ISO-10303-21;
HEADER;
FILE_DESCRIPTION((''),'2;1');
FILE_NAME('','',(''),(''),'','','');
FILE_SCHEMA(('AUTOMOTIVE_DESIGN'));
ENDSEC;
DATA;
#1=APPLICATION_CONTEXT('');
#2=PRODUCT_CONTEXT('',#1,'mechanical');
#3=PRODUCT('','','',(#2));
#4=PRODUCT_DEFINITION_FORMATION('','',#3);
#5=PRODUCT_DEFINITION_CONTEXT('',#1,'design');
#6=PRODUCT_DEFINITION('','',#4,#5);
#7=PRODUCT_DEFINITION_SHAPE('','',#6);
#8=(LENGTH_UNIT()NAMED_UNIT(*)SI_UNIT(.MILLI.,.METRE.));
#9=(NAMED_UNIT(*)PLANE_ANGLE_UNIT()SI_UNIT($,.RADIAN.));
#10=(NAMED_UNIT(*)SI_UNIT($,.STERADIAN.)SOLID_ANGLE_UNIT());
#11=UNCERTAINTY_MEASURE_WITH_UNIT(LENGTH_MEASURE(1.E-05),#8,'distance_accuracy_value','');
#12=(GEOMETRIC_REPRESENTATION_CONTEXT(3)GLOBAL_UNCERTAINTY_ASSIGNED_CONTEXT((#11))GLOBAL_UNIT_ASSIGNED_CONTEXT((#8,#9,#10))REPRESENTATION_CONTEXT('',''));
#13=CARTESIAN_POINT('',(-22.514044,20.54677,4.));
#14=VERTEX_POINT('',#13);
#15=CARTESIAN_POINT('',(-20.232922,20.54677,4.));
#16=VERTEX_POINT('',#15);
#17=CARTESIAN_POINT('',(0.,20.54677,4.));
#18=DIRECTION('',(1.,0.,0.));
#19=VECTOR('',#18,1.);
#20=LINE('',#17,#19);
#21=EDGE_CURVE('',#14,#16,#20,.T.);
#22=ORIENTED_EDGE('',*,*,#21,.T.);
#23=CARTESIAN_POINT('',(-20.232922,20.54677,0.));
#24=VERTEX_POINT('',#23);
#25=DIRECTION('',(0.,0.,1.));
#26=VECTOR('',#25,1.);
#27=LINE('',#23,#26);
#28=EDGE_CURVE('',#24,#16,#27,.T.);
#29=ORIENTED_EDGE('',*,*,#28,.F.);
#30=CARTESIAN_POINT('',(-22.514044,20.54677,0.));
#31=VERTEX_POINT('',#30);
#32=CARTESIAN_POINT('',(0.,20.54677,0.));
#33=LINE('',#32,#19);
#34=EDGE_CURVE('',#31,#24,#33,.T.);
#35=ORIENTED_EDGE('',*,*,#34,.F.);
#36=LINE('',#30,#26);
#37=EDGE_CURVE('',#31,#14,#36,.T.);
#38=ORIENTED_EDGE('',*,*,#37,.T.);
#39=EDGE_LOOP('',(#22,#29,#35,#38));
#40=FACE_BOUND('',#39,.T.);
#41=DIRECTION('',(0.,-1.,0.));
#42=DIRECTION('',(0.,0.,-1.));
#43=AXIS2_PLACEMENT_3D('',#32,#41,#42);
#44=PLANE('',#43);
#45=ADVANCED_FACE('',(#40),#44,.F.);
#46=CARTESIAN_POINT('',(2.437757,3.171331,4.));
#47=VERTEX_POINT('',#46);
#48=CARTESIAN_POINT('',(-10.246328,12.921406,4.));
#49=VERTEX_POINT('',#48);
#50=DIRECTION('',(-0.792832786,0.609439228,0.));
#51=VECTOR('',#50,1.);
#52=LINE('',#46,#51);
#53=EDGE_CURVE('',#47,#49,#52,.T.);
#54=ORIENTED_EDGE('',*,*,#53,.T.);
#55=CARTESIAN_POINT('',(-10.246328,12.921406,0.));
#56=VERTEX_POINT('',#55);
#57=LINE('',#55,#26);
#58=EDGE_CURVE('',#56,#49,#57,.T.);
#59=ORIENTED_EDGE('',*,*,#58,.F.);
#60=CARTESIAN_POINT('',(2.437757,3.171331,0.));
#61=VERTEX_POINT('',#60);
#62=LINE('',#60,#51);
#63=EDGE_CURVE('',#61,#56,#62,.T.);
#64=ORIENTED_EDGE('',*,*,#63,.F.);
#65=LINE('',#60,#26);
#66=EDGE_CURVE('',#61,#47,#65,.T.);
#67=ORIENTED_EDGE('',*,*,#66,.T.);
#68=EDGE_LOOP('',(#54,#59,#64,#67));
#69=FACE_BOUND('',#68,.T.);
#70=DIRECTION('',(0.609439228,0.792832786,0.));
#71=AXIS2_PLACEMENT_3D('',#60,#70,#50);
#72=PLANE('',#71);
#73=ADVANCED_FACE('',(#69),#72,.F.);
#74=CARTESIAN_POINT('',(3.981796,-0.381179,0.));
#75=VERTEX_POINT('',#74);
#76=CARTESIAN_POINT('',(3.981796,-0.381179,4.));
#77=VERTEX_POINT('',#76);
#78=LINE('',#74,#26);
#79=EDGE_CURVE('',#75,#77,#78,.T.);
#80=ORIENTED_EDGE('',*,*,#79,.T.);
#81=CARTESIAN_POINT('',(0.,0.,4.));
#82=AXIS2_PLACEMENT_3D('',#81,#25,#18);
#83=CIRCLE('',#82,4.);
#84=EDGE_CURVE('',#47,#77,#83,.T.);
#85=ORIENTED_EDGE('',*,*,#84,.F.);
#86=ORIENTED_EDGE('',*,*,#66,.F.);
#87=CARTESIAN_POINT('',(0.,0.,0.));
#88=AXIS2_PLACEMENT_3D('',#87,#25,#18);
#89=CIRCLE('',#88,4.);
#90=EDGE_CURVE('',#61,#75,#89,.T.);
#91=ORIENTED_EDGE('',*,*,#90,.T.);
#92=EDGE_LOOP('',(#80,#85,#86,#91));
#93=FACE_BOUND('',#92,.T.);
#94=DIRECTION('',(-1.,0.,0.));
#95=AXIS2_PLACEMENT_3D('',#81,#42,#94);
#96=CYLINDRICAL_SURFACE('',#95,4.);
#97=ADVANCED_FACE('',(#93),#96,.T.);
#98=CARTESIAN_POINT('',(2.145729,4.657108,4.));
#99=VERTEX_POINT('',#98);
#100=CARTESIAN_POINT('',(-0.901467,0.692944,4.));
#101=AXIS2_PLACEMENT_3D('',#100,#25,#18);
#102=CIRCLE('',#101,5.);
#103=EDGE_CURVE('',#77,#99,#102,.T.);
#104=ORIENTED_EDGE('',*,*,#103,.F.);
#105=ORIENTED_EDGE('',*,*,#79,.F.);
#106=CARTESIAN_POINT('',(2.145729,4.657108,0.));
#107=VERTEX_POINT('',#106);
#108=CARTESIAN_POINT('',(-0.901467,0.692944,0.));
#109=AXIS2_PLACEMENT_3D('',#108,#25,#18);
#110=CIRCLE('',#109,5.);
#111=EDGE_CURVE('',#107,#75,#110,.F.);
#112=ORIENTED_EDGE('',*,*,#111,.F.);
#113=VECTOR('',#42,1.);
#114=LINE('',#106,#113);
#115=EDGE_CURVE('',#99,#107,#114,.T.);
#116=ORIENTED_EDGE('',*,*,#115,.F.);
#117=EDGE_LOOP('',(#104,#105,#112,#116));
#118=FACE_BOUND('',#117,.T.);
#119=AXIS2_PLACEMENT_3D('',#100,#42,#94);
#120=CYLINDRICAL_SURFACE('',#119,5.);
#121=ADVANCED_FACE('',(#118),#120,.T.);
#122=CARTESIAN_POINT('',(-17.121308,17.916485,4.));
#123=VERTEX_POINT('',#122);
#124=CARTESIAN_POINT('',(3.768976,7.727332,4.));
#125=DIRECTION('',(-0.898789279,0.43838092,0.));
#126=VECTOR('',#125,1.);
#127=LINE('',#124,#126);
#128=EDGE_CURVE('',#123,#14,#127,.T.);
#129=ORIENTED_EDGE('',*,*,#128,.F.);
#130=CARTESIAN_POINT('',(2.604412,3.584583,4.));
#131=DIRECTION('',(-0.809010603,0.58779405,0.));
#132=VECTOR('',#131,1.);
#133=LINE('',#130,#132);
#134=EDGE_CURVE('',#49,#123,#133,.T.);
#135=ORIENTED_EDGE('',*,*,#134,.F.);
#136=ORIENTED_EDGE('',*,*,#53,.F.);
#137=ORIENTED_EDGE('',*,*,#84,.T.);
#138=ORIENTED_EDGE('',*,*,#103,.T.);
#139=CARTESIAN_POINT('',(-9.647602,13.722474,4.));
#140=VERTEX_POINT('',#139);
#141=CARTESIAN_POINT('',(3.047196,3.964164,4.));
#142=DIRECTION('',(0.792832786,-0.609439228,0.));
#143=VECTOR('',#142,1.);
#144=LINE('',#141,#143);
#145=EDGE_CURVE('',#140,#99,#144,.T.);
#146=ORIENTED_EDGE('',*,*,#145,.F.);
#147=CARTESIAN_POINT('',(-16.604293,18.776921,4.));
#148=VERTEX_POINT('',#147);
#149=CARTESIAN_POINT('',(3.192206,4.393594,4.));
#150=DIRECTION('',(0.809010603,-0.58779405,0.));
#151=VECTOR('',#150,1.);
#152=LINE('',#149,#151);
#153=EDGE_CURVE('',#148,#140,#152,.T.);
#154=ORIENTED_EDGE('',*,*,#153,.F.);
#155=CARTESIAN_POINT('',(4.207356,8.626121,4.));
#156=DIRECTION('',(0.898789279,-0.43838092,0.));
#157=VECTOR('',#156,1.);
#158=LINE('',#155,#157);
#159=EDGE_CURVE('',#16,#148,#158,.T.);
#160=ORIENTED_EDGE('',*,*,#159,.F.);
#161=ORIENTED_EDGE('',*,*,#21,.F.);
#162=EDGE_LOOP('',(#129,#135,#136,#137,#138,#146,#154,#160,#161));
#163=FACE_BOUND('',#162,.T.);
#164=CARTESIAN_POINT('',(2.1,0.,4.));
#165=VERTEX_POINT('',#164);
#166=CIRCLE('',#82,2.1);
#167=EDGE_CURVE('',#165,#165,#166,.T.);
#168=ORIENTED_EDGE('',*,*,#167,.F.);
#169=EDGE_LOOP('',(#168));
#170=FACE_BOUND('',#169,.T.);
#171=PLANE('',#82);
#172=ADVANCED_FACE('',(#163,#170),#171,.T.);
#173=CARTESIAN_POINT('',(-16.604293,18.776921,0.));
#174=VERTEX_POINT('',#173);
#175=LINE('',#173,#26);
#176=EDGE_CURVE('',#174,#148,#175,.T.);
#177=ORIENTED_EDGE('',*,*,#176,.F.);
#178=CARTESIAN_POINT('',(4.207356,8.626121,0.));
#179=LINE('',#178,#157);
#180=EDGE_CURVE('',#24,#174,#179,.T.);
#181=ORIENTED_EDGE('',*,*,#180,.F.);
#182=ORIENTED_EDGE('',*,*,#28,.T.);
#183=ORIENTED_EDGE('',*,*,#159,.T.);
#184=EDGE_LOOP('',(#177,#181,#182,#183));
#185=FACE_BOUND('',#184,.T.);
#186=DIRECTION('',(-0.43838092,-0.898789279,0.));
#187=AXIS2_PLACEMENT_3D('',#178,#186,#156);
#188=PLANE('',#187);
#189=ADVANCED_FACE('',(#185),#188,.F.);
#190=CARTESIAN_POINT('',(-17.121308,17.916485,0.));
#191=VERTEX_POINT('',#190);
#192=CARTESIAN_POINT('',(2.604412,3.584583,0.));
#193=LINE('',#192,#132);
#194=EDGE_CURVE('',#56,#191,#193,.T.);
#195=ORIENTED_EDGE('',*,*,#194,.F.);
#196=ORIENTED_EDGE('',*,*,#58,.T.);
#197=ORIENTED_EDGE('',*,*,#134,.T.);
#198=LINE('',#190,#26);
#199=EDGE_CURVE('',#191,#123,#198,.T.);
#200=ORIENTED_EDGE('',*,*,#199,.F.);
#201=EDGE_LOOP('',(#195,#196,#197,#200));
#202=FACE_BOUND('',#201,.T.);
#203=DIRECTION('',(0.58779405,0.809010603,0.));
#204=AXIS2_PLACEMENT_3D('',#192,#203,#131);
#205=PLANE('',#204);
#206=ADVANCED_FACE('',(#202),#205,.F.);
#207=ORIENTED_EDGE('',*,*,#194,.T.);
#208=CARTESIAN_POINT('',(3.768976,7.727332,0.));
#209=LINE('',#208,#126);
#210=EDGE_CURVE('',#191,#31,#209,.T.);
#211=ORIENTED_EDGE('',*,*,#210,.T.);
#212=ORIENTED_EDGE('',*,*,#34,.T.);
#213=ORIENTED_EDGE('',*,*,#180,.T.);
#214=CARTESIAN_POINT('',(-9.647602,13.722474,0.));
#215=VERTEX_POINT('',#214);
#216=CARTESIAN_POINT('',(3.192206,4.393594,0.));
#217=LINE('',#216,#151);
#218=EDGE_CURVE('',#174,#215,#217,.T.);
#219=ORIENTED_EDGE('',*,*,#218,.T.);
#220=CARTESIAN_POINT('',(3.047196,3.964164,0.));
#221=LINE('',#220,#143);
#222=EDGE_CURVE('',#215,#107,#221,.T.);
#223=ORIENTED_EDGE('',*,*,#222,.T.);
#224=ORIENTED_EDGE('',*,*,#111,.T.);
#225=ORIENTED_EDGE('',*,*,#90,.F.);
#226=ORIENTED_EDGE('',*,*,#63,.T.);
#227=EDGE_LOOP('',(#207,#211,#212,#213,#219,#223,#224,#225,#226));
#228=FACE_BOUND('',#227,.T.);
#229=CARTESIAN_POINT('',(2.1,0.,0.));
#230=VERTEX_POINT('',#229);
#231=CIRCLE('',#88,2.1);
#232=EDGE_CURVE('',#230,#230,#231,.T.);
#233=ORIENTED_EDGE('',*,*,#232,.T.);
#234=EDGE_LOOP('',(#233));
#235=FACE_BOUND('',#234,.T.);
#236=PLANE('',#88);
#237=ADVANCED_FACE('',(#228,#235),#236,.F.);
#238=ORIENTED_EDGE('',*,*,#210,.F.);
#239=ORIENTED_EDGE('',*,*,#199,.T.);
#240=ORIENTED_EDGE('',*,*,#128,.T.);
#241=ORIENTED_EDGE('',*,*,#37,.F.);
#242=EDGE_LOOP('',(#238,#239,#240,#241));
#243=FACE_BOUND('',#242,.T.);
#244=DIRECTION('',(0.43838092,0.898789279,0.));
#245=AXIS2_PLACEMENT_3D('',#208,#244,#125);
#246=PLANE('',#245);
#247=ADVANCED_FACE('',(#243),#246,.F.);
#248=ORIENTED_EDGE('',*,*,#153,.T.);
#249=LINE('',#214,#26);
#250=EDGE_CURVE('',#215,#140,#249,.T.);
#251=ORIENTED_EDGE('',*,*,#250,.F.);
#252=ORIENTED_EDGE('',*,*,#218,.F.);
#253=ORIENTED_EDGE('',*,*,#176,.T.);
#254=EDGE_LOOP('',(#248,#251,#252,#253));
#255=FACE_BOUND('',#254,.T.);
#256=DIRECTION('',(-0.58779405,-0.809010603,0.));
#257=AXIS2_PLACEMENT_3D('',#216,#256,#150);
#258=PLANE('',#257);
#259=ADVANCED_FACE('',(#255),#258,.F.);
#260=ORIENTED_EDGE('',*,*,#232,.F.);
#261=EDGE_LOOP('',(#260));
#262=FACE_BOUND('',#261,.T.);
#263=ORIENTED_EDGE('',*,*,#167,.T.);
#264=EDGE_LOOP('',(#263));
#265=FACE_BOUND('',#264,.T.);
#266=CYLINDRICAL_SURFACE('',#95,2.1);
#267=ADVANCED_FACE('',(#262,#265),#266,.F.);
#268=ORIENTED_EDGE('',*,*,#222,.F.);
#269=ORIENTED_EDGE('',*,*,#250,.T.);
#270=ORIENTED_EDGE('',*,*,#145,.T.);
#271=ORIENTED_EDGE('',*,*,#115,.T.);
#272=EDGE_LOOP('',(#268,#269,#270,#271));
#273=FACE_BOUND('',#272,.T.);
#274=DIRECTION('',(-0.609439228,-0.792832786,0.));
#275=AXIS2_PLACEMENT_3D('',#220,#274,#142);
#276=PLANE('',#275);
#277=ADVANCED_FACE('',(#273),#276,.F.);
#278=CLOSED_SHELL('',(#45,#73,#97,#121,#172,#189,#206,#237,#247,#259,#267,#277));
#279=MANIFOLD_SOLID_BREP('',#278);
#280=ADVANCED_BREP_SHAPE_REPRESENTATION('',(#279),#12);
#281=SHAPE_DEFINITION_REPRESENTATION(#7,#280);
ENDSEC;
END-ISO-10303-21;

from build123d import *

# Parameters (mm, degrees)
CROQUIS1_R              = 4
CROQUIS1_R_2            = 2.1
SALIENTE_EXTRUIR1_DEPTH = 4
SALIENTE_EXTRUIR3_START = -4
SALIENTE_EXTRUIR3_DEPTH = 4
REDONDEO4_R             = 5


# Read off the part's stored shape, not the designer's step: Saliente-Extruir3
with BuildPart() as part:
    # Croquis1 → Saliente-Extruir1 (new body)
    with BuildSketch(Plane.XY):
        Circle(CROQUIS1_R)
        Circle(CROQUIS1_R_2, mode=Mode.SUBTRACT)
    extrude(amount=SALIENTE_EXTRUIR1_DEPTH)

    # Saliente-Extruir3 outline → Saliente-Extruir3 (add)
    with BuildSketch(Plane.XY.offset(4).offset(SALIENTE_EXTRUIR3_START)):
        with BuildLine():
            Line((3.981796419, -0.381178801), (6.969960414, 0.948790732))
            Line((6.969960414, 0.948790732), (-9.647602311, 13.722473625))
            Line((-9.647602311, 13.722473625), (-16.604293056, 18.776920888))
            Line((-16.604293056, 18.776920888), (-20.232922351, 20.546770492))
            Line((-20.232922351, 20.546770492), (-22.514043525, 20.546770492))
            Line((-22.514043525, 20.546770492), (-17.121307849, 17.916484969))
            Line((-17.121307849, 17.916484969), (-10.246328253, 12.921405689))
            Line((-10.246328253, 12.921405689), (2.437756913, 3.171331146))
            ThreePointArc((2.437756913, 3.171331146), (3.668480336, 1.594444112), (3.981796419, -0.381178801))
        make_face()
    extrude(amount=SALIENTE_EXTRUIR3_DEPTH)

    # Redondeo4
    # the kernel refuses this fillet: 5 mm, written as the material it takes off along each edge
    with BuildSketch(Plane(origin=(6.969960414, 0.948790732, -15.212006729), x_dir=(-0.9135962080773964, -0.4066226365890155, 0), z_dir=(0, 0, 1))) as redondeo4_piece_1:
        with BuildLine():
            CenterArc((7.295339023, -2.966960117), REDONDEO4_R, 143.601912221, 64.856271299)
            Line((2.899513394, -5.349546324), (2.811596881, -5.397198048))
            Line((2.811596881, -5.397198048), (-0.087916513, -0.047651724))
            Line((-0.087916513, -0.047651724), (0, 0.1))
            ThreePointArc((0, 0.1), (1.635385507, 0.1), (3.190279653, 0.059339202))
            Line((3.190279653, 0.059339202), (3.270771013, 0))
        make_face()
    extrude(amount=34.424013457, mode=Mode.SUBTRACT)


solid = part.part
